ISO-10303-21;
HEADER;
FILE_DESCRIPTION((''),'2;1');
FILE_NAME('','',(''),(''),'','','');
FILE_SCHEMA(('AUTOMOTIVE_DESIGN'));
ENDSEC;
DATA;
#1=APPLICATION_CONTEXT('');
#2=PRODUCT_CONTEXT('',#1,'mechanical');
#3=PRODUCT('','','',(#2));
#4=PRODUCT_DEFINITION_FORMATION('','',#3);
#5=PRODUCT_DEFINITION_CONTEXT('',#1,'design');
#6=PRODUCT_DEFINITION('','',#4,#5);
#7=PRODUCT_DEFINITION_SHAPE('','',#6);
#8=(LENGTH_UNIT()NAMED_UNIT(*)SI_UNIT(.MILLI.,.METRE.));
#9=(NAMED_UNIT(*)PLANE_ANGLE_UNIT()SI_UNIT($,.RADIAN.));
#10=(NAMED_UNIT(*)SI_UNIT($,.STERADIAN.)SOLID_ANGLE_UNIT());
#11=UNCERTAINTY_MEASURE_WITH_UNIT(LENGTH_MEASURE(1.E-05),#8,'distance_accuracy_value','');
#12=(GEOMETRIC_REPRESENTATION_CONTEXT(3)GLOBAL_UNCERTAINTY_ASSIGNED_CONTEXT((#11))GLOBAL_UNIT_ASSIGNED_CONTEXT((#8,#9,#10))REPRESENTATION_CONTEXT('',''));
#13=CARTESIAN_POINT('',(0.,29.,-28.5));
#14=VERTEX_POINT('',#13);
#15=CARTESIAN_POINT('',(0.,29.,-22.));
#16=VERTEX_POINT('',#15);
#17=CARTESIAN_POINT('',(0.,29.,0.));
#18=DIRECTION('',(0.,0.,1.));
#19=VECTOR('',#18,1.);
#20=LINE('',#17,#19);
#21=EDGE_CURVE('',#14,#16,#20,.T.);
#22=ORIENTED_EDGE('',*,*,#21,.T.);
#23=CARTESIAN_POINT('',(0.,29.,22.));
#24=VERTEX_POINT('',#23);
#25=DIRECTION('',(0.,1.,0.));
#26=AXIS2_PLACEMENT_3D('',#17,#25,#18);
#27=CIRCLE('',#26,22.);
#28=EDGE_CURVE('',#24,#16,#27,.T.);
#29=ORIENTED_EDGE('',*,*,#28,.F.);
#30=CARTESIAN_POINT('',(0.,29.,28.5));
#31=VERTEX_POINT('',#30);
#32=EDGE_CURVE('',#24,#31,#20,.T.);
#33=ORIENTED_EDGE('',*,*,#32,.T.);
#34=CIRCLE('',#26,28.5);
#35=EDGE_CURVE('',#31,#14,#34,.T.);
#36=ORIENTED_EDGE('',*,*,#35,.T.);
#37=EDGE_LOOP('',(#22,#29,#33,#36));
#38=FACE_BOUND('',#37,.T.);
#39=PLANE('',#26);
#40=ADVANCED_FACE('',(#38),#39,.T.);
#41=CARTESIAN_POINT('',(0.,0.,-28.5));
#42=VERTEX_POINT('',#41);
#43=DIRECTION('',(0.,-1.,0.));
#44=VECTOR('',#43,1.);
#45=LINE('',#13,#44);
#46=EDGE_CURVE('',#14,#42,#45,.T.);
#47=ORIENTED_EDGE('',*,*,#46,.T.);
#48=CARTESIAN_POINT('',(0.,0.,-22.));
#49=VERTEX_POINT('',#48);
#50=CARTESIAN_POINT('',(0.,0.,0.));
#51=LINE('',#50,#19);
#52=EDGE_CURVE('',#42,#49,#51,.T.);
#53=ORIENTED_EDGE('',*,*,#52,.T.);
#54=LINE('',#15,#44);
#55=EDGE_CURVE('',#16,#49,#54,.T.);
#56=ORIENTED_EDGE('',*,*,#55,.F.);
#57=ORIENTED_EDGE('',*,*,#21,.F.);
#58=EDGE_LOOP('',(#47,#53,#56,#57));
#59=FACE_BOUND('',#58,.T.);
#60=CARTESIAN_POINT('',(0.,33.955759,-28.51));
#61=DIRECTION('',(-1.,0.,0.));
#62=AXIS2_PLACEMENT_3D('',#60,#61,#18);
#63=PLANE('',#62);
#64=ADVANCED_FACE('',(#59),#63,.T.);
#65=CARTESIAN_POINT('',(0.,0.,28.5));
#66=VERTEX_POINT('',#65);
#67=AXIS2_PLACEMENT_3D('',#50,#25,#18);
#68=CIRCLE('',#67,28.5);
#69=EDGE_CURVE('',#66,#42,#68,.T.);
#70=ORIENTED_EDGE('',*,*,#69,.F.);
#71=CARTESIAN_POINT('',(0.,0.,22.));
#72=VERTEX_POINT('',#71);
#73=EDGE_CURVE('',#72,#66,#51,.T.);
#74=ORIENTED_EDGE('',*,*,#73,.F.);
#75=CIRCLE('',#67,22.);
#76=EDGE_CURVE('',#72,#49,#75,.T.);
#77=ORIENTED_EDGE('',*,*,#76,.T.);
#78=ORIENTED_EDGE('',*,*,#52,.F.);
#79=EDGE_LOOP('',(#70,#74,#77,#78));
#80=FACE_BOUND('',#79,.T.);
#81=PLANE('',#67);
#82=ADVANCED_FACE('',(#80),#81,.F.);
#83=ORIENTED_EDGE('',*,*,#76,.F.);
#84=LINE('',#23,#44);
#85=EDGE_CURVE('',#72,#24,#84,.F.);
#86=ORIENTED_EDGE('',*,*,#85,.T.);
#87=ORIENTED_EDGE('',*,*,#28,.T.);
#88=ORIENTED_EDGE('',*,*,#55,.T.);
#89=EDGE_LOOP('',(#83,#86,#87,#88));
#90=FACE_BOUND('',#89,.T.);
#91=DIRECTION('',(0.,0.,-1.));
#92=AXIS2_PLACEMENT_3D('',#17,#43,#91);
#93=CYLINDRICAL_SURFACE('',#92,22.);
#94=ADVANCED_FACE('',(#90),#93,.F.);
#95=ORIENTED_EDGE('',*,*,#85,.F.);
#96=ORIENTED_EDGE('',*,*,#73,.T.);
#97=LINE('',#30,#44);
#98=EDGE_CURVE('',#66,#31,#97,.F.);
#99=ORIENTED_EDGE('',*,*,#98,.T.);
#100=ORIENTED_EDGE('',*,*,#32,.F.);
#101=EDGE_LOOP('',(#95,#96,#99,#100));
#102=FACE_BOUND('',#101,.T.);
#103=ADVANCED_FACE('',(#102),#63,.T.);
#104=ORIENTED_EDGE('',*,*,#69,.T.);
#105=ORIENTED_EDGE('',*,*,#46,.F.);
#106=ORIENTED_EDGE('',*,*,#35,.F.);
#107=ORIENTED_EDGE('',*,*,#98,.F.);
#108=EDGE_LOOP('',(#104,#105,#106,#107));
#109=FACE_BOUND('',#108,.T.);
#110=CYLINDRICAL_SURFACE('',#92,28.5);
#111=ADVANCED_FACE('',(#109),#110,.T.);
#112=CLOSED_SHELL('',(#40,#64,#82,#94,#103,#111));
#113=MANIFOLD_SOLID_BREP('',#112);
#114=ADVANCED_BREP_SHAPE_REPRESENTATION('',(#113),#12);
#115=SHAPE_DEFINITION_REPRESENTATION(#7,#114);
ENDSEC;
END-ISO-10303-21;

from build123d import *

# Parameters (mm, degrees)
SKETCH1_R                = 28.5
SKETCH1_R_2              = 22
BOSS_EXTRUDE1_DEPTH      = 29
SPLIT1_SURFACE_1_BACK    = 86.668
SPLIT1_SURFACE_1_DEPTH   = 173.336
SPLIT1_SURFACE_2_BACK    = 86.668
SPLIT1_SURFACE_2_DEPTH   = 173.336
BODY_DELETE_KEEP_1_DEPTH = 29


# Read off the part's stored shape, not the designer's step: Body-Delete/Keep 1
with BuildPart() as part:
    # Sketch1 → Boss-Extrude1 (new body)
    with BuildSketch(Plane(origin=(0, 0, 0), x_dir=(1, 0, 0), z_dir=(0, 1, 0))):
        with Locations(Location((0, 0, 0), (0, 0, 270))):
            Circle(SKETCH1_R)
        with Locations(Location((0, 0, 0), (0, 0, 270))):
            Circle(SKETCH1_R_2, mode=Mode.SUBTRACT)
    extrude(amount=BOSS_EXTRUDE1_DEPTH)


with BuildPart() as body_2:
    # Split1: the piece behind the surface
    add(part.part)
    # Split1 surface: a surface, the sketch's curves swept straight by 173.336 mm
    with BuildLine(Plane.XY.offset(-SPLIT1_SURFACE_1_BACK), mode=Mode.PRIVATE) as split1_surface_1_path:
        Line((0, 33.955759062), (0, -6.102624859))
    split1_surface_1 = Shell.extrude(split1_surface_1_path.wire(), (0 * SPLIT1_SURFACE_1_DEPTH, 0 * SPLIT1_SURFACE_1_DEPTH, 1 * SPLIT1_SURFACE_1_DEPTH))
    split(bisect_by=split1_surface_1, keep=Keep.BOTTOM)

    # Body-Delete/Keep 1 outline → Body-Delete/Keep 1 (cut)
    with BuildSketch(Plane(origin=(0, 0, 0), x_dir=(1, 0, 0), z_dir=(0, 1, 0))):
        with BuildLine():
            Line((0, -28.5), (0, -22))
            ThreePointArc((0, -22), (-22, 0), (0, 22))
            Line((0, 22), (0, 28.5))
            ThreePointArc((0, 28.5), (-28.5, 0), (0, -28.5))
        make_face()
    extrude(amount=BODY_DELETE_KEEP_1_DEPTH, mode=Mode.SUBTRACT)


with BuildPart() as part_1:
    add(part.part)

    # Split1: split by a surface, the side it looks to stays
    # Split1 surface: a surface, the sketch's curves swept straight by 173.336 mm
    with BuildLine(Plane.XY.offset(-SPLIT1_SURFACE_2_BACK), mode=Mode.PRIVATE) as split1_surface_2_path:
        Line((0, 33.955759062), (0, -6.102624859))
    split1_surface_2 = Shell.extrude(split1_surface_2_path.wire(), (0 * SPLIT1_SURFACE_2_DEPTH, 0 * SPLIT1_SURFACE_2_DEPTH, 1 * SPLIT1_SURFACE_2_DEPTH))
    split(bisect_by=split1_surface_2, keep=Keep.TOP)


solid = part_1.part
